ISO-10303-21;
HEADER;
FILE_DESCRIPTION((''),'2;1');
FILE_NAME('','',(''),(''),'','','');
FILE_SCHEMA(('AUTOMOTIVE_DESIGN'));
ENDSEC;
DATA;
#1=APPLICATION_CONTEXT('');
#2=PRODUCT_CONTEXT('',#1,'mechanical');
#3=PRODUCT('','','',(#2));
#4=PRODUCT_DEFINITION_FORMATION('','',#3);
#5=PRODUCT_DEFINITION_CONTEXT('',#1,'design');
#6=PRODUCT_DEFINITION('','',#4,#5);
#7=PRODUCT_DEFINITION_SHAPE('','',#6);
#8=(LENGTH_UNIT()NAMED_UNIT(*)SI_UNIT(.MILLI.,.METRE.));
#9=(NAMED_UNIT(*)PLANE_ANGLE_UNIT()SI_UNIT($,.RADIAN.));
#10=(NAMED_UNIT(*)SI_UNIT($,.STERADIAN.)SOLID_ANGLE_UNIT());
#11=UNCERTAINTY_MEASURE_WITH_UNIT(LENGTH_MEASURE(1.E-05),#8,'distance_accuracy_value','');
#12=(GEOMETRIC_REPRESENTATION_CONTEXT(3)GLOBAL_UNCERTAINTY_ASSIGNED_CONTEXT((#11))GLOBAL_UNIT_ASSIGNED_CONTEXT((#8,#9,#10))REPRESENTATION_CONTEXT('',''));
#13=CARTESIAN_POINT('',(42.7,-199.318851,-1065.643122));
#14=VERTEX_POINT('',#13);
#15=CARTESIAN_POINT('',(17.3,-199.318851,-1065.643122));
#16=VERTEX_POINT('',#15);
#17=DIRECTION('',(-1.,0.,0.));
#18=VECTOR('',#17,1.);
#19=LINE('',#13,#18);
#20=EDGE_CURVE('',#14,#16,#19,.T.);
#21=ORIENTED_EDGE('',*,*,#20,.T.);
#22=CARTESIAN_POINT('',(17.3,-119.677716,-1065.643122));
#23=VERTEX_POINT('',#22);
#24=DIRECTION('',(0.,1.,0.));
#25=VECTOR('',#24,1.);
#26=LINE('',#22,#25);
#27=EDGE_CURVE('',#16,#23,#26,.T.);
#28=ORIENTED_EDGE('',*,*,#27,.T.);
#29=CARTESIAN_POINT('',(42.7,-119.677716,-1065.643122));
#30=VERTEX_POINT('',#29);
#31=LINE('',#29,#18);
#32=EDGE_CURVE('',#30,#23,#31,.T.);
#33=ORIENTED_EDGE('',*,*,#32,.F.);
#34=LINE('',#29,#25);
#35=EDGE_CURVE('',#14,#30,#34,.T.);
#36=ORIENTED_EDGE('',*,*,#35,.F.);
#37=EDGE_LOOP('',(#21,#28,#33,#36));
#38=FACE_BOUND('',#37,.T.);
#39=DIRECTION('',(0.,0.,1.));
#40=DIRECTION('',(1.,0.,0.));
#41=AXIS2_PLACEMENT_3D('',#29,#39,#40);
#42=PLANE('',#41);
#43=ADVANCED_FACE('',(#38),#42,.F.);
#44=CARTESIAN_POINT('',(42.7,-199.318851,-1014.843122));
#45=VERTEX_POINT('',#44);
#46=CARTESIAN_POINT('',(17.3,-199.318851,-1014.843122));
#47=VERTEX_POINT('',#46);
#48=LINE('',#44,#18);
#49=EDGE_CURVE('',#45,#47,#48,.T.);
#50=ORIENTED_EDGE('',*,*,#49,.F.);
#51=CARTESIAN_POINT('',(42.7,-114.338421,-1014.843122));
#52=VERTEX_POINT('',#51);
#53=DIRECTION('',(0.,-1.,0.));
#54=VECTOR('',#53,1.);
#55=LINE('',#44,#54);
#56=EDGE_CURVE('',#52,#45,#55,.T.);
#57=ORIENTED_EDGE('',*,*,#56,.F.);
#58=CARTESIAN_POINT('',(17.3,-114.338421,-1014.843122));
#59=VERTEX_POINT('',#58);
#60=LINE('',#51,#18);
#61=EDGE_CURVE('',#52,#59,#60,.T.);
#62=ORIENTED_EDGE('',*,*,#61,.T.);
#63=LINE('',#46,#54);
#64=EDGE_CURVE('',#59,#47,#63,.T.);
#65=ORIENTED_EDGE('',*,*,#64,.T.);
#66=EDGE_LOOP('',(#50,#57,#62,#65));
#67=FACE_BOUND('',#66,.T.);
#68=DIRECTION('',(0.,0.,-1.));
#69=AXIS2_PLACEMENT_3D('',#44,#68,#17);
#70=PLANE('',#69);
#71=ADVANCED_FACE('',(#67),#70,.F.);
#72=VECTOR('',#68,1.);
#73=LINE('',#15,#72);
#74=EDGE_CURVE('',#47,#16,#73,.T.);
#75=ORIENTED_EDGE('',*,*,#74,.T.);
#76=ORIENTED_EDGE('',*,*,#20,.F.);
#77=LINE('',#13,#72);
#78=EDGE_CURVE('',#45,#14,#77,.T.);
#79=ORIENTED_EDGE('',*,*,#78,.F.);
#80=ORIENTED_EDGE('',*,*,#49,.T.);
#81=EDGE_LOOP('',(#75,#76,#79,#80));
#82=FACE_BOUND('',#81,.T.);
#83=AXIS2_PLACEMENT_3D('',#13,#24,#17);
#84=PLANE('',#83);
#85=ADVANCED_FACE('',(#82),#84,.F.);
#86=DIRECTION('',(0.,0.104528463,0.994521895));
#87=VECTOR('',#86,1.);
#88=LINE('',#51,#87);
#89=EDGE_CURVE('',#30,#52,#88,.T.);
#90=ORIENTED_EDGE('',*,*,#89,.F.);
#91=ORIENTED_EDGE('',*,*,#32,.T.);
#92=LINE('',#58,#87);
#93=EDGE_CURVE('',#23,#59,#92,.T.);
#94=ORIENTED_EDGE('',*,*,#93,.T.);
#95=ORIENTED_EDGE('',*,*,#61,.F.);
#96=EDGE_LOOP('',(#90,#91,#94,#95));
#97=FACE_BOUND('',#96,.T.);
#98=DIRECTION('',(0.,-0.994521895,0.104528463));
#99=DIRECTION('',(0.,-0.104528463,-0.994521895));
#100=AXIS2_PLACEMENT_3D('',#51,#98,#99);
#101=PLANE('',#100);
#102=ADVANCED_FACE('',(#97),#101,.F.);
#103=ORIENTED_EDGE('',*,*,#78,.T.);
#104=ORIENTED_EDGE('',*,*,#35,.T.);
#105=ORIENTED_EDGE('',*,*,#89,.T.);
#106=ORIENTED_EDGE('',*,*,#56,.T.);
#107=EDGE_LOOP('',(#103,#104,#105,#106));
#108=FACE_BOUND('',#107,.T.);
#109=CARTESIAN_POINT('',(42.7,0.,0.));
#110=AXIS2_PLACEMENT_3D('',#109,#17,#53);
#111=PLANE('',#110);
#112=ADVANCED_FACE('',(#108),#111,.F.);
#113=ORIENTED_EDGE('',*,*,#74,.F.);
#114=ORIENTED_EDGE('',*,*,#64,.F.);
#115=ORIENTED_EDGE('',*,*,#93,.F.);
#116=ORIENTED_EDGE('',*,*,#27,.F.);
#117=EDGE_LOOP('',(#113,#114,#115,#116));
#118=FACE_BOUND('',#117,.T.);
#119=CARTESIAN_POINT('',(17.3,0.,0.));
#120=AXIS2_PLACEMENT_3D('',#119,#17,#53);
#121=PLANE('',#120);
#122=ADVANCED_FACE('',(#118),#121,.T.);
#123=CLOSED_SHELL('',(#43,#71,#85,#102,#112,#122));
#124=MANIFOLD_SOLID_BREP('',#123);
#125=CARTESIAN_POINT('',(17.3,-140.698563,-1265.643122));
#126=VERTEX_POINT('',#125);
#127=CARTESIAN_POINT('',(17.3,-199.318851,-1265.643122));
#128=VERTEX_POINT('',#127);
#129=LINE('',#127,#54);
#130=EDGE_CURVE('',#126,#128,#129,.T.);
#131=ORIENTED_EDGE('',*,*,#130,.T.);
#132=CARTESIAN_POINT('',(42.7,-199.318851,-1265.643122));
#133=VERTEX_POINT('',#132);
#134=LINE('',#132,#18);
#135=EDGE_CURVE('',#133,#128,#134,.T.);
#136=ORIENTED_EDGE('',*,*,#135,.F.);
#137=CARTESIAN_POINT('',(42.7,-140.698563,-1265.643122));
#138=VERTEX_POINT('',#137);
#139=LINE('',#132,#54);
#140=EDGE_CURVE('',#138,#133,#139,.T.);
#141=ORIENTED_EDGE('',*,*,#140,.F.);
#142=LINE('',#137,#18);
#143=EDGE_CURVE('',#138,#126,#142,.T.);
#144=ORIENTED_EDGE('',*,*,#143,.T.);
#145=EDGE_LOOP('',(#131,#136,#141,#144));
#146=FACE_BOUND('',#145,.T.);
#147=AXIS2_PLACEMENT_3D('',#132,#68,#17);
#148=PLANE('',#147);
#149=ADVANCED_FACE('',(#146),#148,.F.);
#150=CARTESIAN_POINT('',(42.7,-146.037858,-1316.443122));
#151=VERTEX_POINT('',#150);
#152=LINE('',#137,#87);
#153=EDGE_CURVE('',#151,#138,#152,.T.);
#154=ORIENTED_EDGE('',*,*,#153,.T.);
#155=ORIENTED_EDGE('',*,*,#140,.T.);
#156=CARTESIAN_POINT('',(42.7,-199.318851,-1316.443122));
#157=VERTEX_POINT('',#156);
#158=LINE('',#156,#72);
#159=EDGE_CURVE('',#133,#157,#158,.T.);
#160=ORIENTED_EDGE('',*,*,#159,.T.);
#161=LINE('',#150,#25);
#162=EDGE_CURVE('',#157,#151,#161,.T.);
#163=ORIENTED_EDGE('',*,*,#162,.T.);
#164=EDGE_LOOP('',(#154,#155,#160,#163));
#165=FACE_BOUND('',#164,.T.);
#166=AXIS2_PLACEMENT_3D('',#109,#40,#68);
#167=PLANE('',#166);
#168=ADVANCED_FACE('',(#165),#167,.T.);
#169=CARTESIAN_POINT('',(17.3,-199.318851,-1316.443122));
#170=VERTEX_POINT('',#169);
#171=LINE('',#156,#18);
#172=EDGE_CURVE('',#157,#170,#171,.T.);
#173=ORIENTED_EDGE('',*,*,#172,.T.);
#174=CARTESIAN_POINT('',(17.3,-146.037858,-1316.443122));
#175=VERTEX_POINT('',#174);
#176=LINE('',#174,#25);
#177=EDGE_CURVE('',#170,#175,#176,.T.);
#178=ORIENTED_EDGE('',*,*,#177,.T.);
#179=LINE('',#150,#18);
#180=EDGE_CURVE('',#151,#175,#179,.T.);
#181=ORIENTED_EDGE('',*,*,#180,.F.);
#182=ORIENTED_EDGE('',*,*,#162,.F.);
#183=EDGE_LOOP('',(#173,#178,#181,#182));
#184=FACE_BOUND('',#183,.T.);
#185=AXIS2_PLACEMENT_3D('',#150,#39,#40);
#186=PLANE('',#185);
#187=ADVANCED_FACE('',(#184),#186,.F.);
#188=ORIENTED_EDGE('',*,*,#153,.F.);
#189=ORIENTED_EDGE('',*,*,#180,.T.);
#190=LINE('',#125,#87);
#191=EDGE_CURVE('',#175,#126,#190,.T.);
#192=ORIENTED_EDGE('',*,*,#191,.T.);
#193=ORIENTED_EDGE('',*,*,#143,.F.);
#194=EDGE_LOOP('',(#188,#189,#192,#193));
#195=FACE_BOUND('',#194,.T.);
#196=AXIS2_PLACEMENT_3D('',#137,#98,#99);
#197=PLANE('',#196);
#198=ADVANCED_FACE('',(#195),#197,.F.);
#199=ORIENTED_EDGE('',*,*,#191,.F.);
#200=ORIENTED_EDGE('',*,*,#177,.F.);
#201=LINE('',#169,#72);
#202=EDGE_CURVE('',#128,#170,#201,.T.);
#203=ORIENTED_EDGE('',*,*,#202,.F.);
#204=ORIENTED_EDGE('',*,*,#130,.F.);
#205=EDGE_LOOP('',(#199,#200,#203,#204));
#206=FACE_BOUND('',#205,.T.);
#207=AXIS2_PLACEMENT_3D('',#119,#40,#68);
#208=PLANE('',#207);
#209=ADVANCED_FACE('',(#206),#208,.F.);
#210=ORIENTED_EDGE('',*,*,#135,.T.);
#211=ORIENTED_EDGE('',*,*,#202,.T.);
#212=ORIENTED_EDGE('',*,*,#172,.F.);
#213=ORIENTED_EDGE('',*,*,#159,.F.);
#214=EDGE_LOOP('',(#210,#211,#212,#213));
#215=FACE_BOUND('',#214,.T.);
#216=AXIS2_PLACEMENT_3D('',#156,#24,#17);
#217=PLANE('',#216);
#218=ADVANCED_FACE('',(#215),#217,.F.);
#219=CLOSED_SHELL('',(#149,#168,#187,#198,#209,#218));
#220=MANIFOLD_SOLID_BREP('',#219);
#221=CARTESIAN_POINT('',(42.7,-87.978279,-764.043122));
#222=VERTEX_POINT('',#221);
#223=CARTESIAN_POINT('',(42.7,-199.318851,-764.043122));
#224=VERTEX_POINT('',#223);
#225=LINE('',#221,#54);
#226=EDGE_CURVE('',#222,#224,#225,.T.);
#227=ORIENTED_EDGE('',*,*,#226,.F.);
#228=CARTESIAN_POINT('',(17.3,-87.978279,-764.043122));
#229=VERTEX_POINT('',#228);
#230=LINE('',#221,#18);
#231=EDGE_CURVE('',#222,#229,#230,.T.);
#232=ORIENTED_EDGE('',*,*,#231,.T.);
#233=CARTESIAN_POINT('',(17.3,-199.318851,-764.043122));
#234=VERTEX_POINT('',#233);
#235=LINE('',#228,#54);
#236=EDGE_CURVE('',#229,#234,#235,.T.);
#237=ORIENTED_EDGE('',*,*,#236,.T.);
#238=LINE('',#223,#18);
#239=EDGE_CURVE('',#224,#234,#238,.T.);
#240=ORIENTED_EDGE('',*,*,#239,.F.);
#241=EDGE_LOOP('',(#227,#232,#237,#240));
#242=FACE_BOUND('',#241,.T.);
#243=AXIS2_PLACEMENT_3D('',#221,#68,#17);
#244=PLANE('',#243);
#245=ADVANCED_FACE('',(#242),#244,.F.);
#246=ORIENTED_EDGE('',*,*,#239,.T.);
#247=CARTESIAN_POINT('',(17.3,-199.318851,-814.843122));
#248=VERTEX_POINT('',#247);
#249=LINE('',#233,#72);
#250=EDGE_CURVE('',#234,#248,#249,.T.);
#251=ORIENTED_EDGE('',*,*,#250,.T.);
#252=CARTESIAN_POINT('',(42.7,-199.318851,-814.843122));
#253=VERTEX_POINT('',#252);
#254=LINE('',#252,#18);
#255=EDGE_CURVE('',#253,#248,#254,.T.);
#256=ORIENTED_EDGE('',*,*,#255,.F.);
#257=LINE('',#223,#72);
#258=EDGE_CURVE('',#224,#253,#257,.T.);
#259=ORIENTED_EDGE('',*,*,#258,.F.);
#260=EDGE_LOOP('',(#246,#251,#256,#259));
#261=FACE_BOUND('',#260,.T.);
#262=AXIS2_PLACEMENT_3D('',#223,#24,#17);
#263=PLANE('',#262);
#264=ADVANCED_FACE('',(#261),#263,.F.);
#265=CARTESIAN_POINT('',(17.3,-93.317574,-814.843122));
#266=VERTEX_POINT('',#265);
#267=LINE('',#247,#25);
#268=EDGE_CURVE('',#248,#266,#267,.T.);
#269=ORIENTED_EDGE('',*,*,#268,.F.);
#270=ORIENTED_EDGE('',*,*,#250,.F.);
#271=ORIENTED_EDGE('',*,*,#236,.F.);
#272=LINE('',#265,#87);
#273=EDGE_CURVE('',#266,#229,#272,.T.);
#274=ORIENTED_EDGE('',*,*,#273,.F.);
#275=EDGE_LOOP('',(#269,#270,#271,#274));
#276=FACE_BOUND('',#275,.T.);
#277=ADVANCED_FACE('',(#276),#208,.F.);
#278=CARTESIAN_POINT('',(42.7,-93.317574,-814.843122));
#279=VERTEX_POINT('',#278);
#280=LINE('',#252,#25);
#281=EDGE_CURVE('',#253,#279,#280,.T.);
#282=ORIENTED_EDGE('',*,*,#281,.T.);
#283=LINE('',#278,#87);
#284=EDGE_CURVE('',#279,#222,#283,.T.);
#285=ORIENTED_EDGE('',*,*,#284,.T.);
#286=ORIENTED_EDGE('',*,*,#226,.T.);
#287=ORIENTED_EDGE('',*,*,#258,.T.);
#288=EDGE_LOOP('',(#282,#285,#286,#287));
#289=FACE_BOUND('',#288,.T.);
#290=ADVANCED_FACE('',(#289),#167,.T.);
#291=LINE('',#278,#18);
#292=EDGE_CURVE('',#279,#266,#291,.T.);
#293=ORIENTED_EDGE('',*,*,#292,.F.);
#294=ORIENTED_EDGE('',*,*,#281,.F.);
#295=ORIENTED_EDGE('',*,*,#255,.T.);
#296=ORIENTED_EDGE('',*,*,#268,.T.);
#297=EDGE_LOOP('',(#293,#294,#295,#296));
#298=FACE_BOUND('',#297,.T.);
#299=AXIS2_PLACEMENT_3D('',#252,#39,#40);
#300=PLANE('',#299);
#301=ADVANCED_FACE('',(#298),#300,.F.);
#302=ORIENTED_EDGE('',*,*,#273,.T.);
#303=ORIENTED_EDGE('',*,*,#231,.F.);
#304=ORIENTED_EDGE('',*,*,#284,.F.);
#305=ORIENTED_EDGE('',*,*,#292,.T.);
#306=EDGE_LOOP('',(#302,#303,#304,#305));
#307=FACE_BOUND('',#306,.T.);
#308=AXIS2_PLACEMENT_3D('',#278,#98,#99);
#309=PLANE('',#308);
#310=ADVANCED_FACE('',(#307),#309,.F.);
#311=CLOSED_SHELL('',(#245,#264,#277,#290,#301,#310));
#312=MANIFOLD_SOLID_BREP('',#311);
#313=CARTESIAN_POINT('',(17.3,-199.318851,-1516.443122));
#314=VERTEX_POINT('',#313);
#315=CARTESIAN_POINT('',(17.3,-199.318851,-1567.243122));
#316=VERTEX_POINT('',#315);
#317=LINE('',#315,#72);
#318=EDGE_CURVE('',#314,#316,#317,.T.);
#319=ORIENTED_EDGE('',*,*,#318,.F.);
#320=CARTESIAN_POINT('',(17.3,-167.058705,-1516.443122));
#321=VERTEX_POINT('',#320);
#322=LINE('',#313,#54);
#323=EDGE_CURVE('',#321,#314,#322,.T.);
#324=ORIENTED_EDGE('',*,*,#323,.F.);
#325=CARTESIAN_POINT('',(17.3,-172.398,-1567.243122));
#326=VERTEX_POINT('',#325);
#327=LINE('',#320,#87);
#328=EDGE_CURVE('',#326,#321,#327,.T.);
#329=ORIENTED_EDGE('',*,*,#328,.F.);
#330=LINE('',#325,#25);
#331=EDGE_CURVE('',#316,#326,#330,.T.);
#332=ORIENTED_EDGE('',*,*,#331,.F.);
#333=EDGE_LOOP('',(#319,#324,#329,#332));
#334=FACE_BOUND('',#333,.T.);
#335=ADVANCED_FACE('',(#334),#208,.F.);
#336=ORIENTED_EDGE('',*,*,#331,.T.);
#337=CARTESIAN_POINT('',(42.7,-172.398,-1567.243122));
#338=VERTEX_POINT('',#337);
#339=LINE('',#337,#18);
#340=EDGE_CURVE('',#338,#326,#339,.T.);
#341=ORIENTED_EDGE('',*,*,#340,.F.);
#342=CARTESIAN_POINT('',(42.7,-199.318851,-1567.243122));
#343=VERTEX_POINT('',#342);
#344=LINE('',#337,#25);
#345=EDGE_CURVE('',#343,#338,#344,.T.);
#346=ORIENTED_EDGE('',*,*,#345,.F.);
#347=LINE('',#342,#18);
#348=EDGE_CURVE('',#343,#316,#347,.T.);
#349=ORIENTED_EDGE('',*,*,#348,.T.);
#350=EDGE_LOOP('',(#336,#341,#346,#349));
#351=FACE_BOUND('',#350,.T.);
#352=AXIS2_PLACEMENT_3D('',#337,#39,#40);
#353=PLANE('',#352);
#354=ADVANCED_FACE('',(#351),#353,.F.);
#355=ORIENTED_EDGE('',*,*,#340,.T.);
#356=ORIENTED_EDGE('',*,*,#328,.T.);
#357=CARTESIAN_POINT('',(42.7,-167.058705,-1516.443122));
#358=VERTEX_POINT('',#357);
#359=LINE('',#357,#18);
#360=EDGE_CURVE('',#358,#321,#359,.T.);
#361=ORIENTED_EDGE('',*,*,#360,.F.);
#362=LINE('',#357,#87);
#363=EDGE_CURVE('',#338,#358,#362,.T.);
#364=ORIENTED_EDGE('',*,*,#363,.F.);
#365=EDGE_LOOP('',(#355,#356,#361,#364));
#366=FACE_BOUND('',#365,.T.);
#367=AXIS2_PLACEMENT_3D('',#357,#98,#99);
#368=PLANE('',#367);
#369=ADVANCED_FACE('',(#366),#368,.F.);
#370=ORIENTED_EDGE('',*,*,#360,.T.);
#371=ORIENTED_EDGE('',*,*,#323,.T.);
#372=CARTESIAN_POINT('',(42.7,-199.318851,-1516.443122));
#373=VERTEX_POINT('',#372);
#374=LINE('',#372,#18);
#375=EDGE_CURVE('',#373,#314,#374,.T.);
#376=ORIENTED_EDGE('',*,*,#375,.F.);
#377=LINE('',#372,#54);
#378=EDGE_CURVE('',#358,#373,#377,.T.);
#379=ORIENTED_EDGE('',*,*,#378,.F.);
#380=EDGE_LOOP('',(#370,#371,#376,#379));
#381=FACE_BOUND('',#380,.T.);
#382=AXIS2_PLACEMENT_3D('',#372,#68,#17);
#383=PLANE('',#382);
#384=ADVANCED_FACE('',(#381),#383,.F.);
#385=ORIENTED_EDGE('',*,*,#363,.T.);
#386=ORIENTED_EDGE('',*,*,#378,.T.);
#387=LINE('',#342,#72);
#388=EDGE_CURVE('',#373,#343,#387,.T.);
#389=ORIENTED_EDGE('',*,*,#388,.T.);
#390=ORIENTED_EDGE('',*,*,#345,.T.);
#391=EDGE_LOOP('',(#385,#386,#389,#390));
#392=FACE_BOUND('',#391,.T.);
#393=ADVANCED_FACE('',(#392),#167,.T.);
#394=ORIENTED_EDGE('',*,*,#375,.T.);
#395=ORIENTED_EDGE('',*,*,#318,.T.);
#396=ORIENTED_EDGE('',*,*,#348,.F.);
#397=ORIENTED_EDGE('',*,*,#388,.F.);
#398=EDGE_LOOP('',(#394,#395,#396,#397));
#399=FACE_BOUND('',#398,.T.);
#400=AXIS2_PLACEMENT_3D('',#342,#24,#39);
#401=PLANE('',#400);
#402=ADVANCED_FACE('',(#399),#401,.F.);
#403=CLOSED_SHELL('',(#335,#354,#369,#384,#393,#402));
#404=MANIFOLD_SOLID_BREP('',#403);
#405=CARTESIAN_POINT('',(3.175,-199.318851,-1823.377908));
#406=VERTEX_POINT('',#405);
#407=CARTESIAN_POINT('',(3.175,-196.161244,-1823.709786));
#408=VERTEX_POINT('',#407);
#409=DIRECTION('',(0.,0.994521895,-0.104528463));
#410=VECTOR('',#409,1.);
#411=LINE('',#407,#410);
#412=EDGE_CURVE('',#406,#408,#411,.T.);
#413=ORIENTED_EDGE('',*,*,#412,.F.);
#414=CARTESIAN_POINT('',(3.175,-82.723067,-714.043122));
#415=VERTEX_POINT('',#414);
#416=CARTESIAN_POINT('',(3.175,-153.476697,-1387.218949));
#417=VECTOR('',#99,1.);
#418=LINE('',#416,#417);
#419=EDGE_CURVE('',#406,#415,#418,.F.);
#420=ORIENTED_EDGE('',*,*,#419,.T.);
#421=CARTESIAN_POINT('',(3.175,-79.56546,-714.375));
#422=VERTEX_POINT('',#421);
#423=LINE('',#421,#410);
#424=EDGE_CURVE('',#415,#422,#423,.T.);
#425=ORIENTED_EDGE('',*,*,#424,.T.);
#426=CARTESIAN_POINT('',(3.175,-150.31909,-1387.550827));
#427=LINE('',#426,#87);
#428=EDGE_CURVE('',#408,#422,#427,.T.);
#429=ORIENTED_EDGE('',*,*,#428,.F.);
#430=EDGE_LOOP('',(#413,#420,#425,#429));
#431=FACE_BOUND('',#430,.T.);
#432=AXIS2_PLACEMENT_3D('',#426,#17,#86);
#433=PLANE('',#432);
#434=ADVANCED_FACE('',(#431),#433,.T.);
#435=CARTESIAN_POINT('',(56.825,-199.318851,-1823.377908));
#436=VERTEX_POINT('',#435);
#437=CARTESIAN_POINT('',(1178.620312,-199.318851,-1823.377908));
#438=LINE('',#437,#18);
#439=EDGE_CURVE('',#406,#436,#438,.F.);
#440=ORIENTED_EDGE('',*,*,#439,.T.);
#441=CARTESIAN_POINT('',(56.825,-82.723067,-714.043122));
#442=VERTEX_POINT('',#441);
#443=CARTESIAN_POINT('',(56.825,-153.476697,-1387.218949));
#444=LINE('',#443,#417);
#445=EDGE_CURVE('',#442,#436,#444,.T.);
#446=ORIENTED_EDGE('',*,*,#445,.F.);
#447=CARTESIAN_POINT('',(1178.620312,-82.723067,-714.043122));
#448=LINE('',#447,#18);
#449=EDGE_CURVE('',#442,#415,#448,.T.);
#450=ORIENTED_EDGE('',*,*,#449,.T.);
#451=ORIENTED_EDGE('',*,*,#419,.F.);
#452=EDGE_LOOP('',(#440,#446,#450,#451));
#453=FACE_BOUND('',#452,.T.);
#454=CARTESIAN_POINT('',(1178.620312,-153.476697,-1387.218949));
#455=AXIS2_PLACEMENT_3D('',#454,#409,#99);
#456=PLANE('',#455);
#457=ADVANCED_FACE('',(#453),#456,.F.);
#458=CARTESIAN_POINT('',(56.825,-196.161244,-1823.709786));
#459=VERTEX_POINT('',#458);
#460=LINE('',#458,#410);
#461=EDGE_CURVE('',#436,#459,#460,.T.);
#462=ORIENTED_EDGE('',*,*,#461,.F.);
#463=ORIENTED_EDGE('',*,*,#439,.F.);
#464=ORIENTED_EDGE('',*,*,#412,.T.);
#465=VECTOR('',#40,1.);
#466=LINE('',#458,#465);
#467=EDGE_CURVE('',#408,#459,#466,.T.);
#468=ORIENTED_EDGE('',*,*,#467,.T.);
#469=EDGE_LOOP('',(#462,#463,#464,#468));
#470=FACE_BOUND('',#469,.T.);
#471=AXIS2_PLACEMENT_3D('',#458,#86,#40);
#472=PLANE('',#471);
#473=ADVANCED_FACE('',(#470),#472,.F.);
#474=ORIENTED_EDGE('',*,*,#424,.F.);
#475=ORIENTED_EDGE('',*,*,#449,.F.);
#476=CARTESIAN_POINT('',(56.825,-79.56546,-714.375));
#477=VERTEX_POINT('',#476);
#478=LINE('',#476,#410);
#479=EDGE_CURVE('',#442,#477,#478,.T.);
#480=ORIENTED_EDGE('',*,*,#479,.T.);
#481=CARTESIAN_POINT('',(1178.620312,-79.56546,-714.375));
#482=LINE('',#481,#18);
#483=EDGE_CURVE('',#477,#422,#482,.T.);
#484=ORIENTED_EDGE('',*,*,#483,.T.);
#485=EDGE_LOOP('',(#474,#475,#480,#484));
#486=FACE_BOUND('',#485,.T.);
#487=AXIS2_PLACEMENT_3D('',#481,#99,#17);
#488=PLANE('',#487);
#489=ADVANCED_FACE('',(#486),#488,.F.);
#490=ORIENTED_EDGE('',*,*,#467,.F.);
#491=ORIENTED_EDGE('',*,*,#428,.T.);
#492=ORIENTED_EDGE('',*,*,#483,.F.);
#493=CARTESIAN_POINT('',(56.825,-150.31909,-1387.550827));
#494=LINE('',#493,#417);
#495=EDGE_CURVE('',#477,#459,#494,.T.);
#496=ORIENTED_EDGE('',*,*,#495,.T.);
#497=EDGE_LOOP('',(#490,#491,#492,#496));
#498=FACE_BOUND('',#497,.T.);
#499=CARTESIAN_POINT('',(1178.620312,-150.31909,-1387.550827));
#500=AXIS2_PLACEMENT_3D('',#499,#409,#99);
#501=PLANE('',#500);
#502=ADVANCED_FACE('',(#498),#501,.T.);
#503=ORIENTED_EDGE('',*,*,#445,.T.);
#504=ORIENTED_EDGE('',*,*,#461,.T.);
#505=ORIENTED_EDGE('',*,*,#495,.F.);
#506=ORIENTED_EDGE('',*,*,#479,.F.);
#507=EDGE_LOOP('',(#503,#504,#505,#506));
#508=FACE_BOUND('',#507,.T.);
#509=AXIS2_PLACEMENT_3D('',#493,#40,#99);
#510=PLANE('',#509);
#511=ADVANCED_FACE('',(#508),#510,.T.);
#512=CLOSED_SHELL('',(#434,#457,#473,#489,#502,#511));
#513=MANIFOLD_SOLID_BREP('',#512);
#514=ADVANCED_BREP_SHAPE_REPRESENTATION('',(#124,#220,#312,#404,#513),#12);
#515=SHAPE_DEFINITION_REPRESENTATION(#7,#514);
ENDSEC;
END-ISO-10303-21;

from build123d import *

# Parameters (mm, degrees)
SLOPE_THICKEN1_START  = 3.175
SLOPE_THICKEN1_DEPTH  = 53.65
BOSS_EXTRUDE1_DEPTH   = 12.7
BOSS_EXTRUDE1_2_DEPTH = 12.7
BOSS_EXTRUDE1_3_DEPTH = 12.7
BOSS_EXTRUDE1_4_DEPTH = 12.7


# Read off the part's stored shape, not the designer's step: <Slope>-<Thicken1>
with BuildPart() as part:
    # <Slope>-<Thicken1> outline → <Slope>-<Thicken1> (new body)
    with BuildSketch(Plane.YZ.offset(SLOPE_THICKEN1_START)):
        Polygon((-199.318851276, -1823.377908094), (-196.161244258, -1823.709785964), (-79.565459926, -714.375), (-82.723066944, -714.043122129), align=None)
    extrude(amount=SLOPE_THICKEN1_DEPTH)


with BuildPart() as body_2:
    # Sketch2 → Boss-Extrude1 (new, symmetric)
    with BuildSketch(Plane(origin=(30, 0, 0), x_dir=(0, 0, -1), z_dir=(1, 0, 0))):
        Polygon((764.043122129, -87.978278707), (764.043122129, -199.318851276), (814.843122129, -199.318851276), (814.843122129, -93.317573858), align=None)
    extrude(amount=BOSS_EXTRUDE1_DEPTH, both=True)


with BuildPart() as body_3:
    # Sketch2 → Boss-Extrude1 2 (new, symmetric)
    with BuildSketch(Plane(origin=(30, 0, 0), x_dir=(0, 0, -1), z_dir=(1, 0, 0))):
        Polygon((1065.643122129, -199.318851276), (1014.843122129, -199.318851276), (1014.843122129, -114.338420912), (1065.643122129, -119.677716063), align=None)
    extrude(amount=BOSS_EXTRUDE1_2_DEPTH, both=True)


with BuildPart() as body_4:
    # Sketch2 → Boss-Extrude1 3 (new, symmetric)
    with BuildSketch(Plane(origin=(30, 0, 0), x_dir=(0, 0, -1), z_dir=(1, 0, 0))):
        Polygon((1265.643122129, -140.698563116), (1316.443122129, -146.037858268), (1316.443122129, -199.318851276), (1265.643122129, -199.318851276), align=None)
    extrude(amount=BOSS_EXTRUDE1_3_DEPTH, both=True)


with BuildPart() as body_5:
    # Sketch2 → Boss-Extrude1 4 (new, symmetric)
    with BuildSketch(Plane(origin=(30, 0, 0), x_dir=(0, 0, -1), z_dir=(1, 0, 0))):
        Polygon((1516.443122129, -167.058705321), (1567.243122129, -172.398000472), (1567.243122129, -199.318851276), (1516.443122129, -199.318851276), align=None)
    extrude(amount=BOSS_EXTRUDE1_4_DEPTH, both=True)


solid = Compound([part.part, body_2.part, body_3.part, body_4.part, body_5.part])
